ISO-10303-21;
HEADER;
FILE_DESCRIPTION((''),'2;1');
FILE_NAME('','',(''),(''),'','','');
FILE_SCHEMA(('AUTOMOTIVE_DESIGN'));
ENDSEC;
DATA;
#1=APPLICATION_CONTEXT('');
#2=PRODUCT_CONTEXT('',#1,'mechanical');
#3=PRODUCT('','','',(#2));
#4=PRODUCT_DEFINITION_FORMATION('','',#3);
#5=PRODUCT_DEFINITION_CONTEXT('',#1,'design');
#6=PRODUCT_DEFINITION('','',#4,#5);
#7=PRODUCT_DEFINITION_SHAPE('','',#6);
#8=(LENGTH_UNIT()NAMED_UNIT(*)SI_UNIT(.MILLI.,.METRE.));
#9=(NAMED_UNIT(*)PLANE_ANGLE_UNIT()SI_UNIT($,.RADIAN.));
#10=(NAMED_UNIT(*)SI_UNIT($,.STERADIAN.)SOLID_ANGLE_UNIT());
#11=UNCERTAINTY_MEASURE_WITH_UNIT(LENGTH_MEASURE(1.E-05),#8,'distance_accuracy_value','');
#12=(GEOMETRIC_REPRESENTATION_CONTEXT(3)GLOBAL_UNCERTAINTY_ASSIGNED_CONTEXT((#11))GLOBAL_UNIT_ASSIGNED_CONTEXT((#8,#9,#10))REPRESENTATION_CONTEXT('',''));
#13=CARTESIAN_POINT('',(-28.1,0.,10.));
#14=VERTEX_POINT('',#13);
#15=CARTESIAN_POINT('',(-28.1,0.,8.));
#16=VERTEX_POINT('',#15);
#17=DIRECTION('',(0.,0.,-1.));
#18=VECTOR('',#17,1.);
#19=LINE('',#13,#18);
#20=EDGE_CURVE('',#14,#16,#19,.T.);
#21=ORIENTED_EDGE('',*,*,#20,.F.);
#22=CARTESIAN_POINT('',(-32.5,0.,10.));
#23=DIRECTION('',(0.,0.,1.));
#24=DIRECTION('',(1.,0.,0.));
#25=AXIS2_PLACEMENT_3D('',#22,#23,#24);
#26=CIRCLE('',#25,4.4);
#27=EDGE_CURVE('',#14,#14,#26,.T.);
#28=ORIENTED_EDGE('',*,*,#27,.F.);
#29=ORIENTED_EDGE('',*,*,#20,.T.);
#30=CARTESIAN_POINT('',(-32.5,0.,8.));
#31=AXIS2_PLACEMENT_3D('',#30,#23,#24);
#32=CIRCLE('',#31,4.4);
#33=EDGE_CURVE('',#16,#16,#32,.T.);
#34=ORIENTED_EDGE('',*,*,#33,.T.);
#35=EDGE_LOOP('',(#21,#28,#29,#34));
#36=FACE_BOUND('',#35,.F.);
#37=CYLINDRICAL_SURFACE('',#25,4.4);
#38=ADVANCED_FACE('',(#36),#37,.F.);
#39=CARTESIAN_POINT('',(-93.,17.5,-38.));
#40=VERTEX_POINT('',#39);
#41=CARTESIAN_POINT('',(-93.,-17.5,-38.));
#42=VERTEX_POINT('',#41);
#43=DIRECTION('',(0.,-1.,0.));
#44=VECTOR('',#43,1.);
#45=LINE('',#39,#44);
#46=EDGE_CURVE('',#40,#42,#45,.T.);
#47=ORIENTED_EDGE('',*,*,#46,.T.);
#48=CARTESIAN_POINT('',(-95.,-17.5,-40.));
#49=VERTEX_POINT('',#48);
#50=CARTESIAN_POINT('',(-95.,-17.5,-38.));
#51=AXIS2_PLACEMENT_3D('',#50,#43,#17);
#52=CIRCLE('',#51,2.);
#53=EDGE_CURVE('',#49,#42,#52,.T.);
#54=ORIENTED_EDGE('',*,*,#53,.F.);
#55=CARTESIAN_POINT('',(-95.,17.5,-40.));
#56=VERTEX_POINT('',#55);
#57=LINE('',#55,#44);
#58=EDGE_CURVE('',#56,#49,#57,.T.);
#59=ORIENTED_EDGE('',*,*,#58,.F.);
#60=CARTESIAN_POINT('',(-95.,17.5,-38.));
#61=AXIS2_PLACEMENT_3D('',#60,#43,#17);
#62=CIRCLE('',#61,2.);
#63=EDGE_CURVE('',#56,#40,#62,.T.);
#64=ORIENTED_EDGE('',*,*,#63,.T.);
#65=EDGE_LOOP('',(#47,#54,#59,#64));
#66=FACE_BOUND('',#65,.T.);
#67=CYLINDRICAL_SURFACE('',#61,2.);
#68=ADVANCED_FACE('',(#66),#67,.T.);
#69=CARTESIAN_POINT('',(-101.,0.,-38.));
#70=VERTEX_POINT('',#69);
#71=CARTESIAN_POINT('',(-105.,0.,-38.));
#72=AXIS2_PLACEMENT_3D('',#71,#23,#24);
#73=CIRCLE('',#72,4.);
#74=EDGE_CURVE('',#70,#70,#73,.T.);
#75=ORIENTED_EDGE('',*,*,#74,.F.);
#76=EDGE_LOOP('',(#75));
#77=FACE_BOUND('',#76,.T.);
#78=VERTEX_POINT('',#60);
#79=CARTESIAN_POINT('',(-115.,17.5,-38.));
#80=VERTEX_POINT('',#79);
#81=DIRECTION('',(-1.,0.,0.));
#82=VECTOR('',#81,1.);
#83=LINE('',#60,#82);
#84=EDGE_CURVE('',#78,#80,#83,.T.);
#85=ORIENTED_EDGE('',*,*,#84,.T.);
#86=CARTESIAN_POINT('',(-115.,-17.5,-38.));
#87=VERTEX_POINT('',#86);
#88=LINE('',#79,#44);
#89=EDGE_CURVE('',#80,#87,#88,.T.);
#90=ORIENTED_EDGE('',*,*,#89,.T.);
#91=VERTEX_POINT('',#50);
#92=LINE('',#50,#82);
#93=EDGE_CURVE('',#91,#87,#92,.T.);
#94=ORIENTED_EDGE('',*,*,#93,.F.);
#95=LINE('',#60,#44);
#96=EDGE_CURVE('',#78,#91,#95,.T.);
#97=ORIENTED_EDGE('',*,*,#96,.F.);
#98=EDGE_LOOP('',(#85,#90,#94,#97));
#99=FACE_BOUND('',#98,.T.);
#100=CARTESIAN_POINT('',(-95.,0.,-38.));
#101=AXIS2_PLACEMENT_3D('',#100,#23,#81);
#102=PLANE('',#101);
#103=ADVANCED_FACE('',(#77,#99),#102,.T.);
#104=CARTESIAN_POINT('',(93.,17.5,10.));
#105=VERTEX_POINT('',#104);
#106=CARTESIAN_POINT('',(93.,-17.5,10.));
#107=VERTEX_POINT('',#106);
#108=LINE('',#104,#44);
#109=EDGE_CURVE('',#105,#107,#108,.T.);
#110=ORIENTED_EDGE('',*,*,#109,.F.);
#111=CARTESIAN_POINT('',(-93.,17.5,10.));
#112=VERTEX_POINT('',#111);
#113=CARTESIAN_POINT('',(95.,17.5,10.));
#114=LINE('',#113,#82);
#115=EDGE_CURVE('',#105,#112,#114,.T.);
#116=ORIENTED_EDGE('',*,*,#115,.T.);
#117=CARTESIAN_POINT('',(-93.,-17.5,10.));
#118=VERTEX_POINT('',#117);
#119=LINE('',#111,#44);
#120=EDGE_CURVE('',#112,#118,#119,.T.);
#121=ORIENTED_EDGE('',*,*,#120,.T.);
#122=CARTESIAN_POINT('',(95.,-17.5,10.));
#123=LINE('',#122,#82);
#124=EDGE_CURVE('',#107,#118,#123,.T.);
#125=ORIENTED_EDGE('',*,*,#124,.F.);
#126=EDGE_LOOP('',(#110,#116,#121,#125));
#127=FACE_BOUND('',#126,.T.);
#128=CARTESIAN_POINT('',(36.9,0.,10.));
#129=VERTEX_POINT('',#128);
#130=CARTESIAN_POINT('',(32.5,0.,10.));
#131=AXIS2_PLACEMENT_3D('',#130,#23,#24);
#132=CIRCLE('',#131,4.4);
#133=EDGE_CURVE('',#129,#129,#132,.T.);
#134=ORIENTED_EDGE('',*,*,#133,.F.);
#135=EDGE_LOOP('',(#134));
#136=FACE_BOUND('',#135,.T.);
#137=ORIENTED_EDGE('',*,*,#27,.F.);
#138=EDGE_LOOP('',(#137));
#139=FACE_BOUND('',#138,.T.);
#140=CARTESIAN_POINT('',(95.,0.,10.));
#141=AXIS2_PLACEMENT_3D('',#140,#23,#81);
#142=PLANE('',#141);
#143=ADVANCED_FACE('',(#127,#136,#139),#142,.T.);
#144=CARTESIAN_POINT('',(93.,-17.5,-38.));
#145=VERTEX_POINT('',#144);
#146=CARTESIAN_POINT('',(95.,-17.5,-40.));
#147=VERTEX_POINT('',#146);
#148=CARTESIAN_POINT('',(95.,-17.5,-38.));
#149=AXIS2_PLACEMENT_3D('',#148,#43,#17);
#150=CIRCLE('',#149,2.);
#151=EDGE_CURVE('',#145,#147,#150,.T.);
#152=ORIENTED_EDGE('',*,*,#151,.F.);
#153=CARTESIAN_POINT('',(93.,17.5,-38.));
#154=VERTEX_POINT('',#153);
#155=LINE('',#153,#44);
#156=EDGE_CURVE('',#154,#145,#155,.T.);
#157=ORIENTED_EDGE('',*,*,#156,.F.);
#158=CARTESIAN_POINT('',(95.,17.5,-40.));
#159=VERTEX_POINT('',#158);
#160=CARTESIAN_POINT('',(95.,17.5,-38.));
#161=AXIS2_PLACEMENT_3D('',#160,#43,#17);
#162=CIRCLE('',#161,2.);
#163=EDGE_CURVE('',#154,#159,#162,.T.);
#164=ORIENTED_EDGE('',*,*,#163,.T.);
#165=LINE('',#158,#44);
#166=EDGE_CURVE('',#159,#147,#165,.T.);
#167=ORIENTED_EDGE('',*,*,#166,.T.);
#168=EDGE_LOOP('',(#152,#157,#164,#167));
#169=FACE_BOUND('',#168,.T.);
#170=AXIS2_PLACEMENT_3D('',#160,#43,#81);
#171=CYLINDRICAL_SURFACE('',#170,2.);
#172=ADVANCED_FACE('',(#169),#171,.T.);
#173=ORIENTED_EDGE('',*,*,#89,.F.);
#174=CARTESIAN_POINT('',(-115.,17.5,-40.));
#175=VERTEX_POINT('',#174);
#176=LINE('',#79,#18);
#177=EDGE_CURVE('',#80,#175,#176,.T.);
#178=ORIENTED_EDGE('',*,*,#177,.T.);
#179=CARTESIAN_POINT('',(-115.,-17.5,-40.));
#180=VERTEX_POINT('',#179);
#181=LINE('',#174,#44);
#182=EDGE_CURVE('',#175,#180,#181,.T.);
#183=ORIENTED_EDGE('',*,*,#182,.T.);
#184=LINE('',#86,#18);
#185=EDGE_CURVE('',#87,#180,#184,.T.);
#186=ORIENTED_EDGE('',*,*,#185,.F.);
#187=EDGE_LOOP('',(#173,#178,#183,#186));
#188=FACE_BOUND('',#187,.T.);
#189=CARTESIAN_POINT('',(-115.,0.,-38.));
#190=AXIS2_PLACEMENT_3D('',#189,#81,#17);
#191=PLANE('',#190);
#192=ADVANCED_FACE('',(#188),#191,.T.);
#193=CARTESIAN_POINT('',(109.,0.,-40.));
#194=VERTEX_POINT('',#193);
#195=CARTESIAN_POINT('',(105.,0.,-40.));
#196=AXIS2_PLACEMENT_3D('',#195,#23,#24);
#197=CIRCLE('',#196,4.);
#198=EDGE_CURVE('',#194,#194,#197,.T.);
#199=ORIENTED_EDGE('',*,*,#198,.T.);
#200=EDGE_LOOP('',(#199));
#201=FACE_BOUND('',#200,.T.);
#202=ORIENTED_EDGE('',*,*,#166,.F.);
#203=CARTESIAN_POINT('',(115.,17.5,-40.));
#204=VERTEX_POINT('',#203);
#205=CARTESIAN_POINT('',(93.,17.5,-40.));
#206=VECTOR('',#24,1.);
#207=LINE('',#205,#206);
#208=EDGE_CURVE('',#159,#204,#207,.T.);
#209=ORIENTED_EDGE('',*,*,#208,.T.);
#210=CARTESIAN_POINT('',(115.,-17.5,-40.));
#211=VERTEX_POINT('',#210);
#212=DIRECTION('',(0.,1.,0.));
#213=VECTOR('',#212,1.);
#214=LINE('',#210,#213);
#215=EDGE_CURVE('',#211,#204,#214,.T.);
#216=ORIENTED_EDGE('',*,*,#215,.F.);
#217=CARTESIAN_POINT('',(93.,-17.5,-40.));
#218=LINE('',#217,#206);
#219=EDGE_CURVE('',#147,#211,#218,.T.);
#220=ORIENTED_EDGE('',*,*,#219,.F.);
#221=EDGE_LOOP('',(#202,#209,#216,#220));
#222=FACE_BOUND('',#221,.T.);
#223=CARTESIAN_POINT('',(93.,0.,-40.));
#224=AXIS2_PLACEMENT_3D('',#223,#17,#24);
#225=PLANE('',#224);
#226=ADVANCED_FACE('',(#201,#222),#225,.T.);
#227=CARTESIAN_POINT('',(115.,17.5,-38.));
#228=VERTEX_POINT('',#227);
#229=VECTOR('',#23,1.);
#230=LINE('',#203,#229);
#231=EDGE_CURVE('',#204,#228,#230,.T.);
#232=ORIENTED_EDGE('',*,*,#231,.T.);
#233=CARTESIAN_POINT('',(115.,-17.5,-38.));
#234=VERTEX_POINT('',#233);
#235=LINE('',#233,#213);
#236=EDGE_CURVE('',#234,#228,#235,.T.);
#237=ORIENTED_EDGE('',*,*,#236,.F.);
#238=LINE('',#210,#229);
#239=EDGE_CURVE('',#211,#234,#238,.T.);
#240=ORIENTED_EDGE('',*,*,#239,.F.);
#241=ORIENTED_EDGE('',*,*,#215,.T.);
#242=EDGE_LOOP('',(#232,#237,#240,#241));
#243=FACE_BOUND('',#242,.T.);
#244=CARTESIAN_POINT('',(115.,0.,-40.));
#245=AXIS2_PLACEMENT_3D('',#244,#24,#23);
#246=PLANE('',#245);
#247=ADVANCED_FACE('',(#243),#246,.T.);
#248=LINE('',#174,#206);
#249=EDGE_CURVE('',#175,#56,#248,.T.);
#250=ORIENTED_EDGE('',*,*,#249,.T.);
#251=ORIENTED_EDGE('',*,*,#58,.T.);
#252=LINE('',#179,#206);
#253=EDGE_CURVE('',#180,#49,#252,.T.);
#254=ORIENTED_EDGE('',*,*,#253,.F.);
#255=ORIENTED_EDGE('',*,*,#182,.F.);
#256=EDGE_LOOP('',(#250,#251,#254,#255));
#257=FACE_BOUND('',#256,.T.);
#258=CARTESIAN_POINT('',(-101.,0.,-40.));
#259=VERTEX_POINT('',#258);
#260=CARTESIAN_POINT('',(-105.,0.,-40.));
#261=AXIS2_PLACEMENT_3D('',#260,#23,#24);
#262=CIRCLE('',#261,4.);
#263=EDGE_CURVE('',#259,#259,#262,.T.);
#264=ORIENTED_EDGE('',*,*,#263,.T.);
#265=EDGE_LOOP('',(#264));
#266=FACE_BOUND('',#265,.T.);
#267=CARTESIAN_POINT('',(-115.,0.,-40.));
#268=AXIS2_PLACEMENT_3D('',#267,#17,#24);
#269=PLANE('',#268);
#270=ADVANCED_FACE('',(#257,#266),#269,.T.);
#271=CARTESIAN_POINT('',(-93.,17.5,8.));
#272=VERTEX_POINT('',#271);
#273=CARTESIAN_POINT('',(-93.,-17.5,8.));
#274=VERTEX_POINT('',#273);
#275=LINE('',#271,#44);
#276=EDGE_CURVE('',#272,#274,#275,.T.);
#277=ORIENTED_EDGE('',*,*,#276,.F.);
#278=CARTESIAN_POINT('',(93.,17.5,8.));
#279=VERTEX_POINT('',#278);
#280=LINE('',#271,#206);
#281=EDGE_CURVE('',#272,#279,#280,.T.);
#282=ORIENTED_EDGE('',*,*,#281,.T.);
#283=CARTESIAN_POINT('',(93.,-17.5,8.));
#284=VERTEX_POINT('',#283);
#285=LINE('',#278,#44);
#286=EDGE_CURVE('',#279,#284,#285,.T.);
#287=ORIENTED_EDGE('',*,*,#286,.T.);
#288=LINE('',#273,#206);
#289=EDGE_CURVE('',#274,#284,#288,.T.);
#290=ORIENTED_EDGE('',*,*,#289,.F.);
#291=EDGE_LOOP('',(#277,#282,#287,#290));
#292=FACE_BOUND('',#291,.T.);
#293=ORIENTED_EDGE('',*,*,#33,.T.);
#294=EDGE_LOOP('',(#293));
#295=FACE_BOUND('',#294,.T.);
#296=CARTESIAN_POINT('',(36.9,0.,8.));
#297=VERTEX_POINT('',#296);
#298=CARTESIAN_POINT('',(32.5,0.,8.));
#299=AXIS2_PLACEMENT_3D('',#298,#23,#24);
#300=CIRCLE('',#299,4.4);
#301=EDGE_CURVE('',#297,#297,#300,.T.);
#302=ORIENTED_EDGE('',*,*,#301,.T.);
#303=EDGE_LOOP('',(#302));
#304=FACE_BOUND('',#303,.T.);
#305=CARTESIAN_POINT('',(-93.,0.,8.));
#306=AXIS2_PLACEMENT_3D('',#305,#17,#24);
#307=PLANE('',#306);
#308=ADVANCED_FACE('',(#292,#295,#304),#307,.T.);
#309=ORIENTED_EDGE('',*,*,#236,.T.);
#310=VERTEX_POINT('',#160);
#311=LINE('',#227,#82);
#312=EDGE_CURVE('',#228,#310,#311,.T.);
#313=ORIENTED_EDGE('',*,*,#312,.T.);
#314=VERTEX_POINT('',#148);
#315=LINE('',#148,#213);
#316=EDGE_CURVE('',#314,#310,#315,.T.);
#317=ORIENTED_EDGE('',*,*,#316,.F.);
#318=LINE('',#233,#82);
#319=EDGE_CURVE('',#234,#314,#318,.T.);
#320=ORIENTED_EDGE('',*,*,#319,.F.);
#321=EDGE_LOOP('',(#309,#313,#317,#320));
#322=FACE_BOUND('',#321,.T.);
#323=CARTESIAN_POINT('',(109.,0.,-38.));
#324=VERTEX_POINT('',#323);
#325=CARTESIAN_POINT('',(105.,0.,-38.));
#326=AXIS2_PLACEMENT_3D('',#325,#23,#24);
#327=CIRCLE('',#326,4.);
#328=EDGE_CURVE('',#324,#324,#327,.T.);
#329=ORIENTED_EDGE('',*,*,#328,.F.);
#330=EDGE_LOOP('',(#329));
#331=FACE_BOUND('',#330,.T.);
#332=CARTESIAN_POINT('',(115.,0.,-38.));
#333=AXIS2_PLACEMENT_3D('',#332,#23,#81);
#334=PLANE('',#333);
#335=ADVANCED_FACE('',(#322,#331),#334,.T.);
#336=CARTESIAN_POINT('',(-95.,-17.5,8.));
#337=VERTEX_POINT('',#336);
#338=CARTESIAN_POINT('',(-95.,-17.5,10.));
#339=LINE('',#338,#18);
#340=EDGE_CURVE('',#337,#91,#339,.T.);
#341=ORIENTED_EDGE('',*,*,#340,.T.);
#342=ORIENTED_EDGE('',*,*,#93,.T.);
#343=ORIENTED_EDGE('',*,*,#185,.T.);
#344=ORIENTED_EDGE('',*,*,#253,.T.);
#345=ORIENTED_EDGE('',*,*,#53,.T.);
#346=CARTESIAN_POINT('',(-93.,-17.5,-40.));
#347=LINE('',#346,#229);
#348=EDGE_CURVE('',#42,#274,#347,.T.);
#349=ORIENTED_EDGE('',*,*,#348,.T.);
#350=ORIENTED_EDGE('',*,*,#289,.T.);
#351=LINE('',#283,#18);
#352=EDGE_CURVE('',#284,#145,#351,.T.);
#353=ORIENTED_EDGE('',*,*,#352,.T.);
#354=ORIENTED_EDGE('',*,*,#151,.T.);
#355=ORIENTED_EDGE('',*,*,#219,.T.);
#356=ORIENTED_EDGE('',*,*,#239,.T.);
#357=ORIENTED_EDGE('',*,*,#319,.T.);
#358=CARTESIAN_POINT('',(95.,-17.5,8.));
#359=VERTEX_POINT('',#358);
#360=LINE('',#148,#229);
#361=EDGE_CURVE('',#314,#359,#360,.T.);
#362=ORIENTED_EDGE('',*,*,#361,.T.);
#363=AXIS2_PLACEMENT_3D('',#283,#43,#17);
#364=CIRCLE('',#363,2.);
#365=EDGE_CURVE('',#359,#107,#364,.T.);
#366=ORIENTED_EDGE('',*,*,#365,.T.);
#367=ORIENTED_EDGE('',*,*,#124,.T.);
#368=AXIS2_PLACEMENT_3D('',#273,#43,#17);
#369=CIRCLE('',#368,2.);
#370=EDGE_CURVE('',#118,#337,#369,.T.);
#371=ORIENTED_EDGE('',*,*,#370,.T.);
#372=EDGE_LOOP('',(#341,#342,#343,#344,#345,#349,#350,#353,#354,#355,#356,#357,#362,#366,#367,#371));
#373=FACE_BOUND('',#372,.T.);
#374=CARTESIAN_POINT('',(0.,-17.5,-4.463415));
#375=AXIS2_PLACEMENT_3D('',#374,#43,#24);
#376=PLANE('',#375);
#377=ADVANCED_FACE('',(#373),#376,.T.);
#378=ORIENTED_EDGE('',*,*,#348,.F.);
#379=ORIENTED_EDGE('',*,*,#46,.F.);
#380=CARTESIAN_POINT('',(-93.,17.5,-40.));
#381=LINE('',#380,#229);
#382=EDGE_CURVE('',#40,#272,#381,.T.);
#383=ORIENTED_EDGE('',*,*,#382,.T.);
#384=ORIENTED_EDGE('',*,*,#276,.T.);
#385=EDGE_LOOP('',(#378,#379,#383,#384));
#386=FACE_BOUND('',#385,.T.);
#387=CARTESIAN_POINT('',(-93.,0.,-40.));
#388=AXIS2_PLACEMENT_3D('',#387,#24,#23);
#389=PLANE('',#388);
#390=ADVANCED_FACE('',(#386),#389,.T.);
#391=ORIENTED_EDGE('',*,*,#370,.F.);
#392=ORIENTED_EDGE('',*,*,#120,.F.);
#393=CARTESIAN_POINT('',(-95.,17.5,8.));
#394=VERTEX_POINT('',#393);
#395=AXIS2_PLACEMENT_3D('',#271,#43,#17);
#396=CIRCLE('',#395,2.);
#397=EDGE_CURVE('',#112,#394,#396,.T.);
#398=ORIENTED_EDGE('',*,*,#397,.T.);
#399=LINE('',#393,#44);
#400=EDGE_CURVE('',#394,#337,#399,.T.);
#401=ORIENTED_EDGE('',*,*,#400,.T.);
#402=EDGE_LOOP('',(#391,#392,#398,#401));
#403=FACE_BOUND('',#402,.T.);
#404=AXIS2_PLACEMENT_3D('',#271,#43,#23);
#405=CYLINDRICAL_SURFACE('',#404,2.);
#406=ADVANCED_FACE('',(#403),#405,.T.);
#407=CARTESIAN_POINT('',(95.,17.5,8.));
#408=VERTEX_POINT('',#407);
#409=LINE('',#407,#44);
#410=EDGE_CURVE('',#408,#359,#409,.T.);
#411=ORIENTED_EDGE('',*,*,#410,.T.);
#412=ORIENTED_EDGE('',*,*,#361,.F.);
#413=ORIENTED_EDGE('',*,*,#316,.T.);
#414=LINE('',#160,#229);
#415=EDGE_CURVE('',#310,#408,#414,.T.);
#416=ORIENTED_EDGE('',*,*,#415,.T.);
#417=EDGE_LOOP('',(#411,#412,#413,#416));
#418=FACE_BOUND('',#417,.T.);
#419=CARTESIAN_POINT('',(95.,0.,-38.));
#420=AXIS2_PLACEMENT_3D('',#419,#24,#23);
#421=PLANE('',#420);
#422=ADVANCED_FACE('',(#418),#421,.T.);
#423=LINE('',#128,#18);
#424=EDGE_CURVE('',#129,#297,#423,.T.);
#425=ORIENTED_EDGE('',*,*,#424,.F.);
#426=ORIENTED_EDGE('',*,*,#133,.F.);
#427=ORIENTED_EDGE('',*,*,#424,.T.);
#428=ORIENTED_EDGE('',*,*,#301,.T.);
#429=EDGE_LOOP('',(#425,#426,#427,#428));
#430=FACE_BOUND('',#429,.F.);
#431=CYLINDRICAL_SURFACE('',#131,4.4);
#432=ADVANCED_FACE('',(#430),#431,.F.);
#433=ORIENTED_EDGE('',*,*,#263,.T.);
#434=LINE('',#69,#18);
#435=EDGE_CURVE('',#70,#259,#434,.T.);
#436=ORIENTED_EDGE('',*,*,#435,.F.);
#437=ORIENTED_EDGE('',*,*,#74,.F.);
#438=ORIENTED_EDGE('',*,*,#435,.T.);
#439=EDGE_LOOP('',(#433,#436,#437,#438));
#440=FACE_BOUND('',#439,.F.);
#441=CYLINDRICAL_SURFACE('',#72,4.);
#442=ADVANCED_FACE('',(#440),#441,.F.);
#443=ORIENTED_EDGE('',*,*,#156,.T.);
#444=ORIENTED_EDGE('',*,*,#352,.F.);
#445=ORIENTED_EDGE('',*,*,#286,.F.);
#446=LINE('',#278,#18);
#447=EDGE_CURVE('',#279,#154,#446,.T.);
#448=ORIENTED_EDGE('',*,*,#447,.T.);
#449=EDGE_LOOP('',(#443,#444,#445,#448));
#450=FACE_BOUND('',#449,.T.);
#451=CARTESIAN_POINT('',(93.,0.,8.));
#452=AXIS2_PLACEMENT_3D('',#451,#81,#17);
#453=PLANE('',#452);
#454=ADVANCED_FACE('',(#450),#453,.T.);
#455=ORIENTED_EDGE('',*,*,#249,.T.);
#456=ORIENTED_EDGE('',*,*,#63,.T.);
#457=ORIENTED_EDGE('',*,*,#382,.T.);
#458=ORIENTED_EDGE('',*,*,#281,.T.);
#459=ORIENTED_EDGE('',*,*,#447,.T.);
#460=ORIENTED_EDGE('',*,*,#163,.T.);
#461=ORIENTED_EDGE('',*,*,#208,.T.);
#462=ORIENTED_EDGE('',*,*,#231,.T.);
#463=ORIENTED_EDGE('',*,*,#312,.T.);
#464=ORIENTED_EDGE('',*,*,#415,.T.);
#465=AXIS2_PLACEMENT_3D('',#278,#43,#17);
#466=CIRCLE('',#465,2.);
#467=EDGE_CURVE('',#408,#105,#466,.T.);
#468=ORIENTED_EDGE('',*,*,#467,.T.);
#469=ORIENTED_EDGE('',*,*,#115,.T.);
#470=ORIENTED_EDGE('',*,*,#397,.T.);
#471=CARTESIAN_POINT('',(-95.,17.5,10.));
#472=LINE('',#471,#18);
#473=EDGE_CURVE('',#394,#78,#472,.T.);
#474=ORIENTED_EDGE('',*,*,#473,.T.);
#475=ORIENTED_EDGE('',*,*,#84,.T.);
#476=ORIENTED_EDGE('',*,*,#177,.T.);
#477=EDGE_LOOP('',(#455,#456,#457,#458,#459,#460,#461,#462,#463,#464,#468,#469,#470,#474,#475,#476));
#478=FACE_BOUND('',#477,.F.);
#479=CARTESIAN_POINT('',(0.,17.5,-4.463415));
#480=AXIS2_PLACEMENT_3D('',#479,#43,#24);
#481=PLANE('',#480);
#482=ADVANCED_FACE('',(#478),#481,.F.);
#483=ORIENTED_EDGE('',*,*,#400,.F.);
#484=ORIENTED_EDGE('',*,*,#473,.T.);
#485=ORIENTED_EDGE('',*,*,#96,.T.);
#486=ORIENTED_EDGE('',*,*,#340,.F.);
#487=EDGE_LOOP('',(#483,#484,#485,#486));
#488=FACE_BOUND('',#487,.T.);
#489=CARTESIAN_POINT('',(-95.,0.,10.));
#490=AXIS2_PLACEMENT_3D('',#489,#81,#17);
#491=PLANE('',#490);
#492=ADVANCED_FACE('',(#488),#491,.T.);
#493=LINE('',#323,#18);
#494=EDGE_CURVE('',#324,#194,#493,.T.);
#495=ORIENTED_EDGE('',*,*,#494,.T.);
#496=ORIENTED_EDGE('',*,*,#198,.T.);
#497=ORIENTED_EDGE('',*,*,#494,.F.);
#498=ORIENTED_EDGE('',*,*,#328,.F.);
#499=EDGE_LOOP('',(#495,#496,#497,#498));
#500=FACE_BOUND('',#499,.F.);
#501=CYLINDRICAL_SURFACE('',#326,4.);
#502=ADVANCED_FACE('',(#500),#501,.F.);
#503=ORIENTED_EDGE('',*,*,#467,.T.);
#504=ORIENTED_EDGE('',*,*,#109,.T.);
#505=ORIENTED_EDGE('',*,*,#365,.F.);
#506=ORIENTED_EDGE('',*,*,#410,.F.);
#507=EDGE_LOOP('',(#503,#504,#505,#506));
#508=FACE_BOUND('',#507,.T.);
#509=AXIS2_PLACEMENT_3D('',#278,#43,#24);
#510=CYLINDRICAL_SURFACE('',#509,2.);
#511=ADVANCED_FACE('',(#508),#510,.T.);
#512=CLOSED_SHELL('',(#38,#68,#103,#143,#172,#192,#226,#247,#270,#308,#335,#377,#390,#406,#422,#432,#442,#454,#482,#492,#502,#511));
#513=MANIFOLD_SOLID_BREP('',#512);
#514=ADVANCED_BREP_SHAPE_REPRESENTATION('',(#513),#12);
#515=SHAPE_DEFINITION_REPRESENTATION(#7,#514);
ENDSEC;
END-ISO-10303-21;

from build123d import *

# Parameters (mm, degrees)
F1_DEPTH = 17.5
F2_R     = 4
F3_DEPTH = 25
F4_R     = 4.4
F5_DEPTH = 25
F6_R     = 2


# Not quite as in the source:
# - a feature names something its author has since deleted; it is built from what else it names


with BuildPart() as f1:
    # F0 (on Front) → F1 (new body, symmetric)
    with BuildSketch(Plane.XZ):
        Polygon((95, -38), (95, 10), (-95, 10), (-95, -38), (-115, -38), (-115, -40), (-93, -40), (-93, 8), (93, 8), (93, -40), (115, -40), (115, -38), align=None)
    extrude(amount=F1_DEPTH, both=True)

    # F2 (on face) → F3 (cut)
    with BuildSketch(Plane.XY.offset(-38)):
        with Locations((-105, 0)):
            Circle(F2_R)
        with Locations((105, 0)):
            Circle(F2_R)
    extrude(amount=-F3_DEPTH, mode=Mode.SUBTRACT)

    # F4 (on face) → F5 (cut)
    with BuildSketch(Plane.XY.offset(10)):
        with Locations((-32.5, 0)):
            Circle(F4_R)
        with Locations((32.5, 0)):
            Circle(F4_R)
    extrude(amount=-F5_DEPTH, mode=Mode.SUBTRACT)

    # F6
    f6_edges = [f1.edges().sort_by_distance(p)[0] for p in [
        (95, 0, 10),
        (-95, 0, 10),
        (-93, 0, -40),
        (93, 0, -40),
    ]]
    fillet(f6_edges, radius=F6_R)


solid = f1.part
